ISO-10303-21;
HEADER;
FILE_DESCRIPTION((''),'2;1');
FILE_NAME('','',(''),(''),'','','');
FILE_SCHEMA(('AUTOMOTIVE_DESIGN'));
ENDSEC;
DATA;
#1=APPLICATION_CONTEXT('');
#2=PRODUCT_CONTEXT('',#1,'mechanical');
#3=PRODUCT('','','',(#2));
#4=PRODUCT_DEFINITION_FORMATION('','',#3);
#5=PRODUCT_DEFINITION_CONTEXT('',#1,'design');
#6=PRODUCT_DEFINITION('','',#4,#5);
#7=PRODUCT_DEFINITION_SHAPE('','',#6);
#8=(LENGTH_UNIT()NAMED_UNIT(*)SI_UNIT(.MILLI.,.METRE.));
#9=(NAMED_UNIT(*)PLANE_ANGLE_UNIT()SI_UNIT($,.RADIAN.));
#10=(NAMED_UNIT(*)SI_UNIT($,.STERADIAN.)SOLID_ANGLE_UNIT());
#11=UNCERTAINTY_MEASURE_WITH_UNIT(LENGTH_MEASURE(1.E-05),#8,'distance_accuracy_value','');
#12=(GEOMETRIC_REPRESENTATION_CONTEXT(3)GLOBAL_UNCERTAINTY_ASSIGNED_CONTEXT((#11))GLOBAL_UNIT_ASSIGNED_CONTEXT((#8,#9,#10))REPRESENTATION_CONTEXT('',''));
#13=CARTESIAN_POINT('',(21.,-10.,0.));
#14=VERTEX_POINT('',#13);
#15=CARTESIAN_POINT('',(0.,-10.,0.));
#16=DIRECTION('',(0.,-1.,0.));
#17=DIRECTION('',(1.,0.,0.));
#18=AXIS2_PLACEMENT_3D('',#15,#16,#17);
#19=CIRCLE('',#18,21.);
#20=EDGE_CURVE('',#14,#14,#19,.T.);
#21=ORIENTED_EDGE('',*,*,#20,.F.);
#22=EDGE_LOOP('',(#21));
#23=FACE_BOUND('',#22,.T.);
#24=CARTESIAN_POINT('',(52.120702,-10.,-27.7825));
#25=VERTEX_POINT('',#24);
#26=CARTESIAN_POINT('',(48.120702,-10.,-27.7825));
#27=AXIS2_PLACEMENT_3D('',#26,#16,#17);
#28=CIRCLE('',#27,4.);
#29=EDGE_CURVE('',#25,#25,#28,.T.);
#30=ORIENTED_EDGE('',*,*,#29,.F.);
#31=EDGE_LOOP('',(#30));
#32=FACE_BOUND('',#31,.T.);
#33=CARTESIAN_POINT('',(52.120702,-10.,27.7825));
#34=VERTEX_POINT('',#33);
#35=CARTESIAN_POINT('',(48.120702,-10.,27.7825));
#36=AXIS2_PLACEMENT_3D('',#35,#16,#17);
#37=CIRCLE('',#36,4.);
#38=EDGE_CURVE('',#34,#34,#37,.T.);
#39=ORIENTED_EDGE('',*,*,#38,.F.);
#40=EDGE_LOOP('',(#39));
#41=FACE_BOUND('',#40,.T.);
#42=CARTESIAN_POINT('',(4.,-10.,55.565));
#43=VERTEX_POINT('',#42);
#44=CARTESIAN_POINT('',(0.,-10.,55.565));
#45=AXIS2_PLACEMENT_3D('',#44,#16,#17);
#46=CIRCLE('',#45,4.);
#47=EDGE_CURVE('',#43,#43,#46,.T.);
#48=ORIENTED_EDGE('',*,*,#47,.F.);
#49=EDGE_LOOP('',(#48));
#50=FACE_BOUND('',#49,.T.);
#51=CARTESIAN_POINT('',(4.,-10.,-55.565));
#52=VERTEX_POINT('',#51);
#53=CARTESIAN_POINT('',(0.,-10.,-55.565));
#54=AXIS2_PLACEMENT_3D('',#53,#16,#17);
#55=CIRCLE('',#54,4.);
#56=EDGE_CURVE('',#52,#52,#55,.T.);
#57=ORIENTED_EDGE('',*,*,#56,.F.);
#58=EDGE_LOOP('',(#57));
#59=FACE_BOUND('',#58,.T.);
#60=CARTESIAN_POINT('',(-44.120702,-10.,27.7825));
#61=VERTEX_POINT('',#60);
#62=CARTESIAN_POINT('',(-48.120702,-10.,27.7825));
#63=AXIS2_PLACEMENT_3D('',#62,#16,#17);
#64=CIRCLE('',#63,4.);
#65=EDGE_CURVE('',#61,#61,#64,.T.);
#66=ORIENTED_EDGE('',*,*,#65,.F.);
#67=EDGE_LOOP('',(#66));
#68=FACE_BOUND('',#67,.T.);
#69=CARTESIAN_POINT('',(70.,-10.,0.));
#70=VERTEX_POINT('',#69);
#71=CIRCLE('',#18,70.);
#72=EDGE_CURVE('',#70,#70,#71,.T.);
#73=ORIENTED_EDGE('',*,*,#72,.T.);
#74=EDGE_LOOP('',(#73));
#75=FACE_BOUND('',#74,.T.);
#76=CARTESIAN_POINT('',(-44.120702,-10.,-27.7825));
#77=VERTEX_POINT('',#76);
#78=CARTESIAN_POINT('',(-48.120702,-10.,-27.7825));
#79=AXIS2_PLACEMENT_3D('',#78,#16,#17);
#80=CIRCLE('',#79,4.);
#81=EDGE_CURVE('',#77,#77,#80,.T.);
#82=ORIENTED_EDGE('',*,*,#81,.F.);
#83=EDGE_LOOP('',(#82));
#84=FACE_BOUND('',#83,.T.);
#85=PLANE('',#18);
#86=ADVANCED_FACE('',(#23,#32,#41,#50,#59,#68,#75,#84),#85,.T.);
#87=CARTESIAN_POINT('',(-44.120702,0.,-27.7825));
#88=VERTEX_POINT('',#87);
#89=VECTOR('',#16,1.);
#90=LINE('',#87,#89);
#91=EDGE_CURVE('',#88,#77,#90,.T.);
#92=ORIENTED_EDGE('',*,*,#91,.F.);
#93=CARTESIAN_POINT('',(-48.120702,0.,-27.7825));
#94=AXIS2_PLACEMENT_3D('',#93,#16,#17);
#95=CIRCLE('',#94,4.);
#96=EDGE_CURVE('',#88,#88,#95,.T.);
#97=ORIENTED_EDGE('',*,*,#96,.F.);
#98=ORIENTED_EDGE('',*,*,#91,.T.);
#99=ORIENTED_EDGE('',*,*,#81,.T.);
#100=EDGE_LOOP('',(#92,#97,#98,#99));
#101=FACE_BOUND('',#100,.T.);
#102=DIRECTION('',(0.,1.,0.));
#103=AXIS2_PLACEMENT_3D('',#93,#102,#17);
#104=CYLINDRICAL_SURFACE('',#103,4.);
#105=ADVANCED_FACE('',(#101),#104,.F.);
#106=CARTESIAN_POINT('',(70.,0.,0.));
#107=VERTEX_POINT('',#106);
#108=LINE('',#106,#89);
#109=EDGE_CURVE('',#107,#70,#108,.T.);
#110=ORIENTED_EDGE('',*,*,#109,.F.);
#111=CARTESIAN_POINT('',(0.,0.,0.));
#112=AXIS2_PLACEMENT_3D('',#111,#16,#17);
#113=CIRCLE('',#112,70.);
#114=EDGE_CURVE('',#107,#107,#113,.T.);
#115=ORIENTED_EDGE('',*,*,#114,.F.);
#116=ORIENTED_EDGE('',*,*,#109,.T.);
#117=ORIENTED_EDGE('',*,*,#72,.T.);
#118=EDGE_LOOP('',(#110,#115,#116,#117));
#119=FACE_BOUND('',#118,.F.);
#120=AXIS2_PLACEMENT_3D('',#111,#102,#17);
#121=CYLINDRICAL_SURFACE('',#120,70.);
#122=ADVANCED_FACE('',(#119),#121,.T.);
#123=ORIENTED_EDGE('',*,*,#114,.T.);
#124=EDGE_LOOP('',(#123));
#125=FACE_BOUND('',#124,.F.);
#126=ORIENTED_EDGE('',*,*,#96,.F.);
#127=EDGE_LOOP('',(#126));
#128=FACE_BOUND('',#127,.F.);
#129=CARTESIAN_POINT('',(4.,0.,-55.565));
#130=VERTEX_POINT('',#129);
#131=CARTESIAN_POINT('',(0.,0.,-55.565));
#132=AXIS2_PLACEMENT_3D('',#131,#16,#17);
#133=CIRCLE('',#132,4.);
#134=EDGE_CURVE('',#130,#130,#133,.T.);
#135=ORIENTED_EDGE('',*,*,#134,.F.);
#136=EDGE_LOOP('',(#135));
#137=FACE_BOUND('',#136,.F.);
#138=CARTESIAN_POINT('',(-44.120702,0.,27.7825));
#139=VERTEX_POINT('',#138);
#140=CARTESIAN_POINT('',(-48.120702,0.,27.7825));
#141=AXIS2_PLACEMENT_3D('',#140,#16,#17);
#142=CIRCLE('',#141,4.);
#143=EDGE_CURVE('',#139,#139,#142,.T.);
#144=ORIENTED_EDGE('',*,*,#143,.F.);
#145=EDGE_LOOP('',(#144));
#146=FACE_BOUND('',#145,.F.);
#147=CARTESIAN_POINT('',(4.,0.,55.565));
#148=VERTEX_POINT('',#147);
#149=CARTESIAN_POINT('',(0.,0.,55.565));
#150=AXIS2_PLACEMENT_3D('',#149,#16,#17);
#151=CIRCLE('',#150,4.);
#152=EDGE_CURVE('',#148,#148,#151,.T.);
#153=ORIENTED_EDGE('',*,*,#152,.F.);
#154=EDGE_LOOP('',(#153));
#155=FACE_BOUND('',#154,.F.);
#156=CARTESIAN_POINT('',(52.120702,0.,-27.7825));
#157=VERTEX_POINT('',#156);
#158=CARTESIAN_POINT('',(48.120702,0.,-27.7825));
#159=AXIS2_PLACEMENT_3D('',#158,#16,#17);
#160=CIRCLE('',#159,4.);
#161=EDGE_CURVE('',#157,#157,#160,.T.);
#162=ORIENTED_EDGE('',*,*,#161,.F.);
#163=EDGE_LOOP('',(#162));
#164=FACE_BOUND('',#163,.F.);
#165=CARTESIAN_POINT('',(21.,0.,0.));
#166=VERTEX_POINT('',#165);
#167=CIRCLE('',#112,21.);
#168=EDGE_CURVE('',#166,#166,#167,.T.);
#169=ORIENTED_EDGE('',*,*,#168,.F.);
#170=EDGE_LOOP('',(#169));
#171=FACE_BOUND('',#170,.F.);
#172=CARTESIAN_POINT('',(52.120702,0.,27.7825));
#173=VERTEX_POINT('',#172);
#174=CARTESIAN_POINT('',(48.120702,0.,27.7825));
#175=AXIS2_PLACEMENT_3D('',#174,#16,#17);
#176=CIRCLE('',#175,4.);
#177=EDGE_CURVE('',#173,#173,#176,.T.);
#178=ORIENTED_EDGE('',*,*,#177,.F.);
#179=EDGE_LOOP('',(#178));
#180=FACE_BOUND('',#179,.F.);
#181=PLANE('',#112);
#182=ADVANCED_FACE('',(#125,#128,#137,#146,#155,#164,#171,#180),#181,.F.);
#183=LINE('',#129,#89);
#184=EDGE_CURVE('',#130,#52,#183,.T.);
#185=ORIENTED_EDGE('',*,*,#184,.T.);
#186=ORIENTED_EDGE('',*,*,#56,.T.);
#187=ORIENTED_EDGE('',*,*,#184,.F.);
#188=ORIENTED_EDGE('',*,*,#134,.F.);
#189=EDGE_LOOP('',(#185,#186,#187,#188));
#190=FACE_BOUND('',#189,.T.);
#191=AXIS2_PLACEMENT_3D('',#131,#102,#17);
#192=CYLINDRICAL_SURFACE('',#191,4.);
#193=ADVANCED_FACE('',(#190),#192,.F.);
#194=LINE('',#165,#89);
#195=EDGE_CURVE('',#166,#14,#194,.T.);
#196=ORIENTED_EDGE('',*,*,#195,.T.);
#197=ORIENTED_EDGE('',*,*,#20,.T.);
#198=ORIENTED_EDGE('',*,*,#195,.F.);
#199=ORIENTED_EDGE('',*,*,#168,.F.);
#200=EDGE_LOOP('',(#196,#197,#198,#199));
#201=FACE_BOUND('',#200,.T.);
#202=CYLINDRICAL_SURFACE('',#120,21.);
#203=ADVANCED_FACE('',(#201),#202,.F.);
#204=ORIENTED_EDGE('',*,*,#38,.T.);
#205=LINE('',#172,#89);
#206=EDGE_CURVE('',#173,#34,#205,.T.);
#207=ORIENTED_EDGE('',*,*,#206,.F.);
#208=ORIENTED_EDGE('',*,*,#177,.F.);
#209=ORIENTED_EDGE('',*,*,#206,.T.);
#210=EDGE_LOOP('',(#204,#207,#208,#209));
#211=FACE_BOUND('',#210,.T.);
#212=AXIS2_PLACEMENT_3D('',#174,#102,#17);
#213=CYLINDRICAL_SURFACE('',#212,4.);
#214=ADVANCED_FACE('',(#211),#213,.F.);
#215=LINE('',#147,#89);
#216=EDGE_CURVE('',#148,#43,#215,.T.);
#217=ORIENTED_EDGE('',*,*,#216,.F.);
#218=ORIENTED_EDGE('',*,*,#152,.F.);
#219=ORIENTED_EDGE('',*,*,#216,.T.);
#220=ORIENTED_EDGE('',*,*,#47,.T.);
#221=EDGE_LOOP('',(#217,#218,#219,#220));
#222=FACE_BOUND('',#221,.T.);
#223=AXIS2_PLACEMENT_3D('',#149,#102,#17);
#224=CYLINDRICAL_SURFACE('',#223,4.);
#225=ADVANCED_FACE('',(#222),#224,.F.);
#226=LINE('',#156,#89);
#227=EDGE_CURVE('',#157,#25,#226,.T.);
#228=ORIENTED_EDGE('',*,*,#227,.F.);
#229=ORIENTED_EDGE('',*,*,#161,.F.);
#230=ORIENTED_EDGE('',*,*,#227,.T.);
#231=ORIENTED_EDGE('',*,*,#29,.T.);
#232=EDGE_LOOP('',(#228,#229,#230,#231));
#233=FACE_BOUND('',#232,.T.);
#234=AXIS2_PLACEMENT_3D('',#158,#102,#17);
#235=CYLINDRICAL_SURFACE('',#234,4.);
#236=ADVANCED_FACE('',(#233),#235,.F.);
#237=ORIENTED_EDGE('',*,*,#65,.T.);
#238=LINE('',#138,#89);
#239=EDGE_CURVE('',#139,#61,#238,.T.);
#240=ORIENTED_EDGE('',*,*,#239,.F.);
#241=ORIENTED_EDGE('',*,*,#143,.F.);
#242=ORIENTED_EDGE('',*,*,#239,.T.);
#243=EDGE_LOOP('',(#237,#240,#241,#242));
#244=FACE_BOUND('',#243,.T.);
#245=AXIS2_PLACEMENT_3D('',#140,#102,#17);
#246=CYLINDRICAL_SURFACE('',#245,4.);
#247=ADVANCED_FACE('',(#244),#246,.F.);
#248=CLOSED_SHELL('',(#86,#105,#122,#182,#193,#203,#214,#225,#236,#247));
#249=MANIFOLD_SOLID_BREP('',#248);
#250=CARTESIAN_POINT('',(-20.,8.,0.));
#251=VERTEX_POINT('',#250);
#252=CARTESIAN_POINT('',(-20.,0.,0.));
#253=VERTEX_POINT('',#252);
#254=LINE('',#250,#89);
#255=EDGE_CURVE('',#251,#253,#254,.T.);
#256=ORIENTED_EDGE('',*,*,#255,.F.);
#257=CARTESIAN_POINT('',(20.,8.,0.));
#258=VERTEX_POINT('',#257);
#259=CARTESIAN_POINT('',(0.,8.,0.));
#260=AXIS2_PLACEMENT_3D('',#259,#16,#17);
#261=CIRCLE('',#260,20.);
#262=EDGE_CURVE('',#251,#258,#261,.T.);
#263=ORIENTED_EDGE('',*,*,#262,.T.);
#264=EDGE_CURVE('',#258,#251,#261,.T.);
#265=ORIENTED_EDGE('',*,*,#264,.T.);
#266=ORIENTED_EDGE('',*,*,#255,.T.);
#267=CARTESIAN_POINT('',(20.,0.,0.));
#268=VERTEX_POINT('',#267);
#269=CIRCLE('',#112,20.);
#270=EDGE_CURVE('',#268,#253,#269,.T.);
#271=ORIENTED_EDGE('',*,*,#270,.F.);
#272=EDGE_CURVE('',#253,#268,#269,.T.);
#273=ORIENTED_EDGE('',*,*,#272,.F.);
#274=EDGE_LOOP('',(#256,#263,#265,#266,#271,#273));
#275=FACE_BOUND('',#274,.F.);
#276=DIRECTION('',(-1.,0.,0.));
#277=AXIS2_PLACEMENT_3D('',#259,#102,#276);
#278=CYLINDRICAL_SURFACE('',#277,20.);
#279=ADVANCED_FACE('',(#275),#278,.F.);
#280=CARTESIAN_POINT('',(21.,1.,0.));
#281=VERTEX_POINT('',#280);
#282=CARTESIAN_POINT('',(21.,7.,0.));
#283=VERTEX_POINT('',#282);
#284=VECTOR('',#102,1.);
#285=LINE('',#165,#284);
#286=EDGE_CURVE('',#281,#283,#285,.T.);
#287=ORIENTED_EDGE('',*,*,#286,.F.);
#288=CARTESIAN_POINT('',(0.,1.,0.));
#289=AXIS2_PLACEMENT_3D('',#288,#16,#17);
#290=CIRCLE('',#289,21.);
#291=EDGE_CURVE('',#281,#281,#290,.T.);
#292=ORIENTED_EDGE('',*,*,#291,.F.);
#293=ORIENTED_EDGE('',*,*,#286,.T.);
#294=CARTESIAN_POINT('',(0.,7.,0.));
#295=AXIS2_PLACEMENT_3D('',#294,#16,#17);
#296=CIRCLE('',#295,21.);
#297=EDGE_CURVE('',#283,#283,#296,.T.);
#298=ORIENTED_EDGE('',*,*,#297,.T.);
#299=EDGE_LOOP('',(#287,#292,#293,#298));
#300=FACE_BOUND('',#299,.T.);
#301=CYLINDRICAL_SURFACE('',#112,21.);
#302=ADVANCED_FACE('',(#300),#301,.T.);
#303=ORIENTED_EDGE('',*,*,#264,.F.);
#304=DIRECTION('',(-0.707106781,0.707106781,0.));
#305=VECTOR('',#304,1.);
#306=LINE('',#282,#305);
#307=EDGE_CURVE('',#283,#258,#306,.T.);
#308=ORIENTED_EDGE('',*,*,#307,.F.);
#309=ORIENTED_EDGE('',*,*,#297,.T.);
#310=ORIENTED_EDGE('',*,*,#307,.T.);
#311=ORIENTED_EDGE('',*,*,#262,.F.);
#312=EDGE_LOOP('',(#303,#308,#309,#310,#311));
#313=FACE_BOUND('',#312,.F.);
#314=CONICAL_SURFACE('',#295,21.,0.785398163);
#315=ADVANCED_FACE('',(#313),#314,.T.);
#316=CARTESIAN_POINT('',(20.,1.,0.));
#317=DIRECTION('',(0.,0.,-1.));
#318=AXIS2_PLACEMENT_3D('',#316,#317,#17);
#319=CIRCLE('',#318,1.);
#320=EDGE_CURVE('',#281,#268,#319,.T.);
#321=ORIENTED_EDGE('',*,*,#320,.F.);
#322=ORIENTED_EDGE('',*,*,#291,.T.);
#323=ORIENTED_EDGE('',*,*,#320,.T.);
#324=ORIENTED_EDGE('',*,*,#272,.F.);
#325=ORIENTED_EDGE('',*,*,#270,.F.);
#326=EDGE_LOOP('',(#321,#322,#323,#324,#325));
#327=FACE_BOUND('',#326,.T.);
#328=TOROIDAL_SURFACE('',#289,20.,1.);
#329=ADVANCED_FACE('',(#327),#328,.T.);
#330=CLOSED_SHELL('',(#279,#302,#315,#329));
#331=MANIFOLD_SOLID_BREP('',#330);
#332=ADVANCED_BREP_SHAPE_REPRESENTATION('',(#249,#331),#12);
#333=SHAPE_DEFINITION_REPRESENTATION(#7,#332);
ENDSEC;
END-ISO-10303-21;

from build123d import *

# Parameters (mm, degrees)
F0_R     = 70
F0_R_2   = 4
F0_R_3   = 21
F1_DEPTH = 10
F2_R     = 21
F3_DEPTH = 8
F4_SIZE  = 1
F6_R     = 20
F7_DEPTH = 20


# Not quite as in the source:
# - a fillet or chamfer that OpenCascade refuses, or shapes differently, is made with other operations: its cross-section is extruded or revolved along the edge and cut away or added


with BuildPart() as f1:
    # F0 (on Front) → F1 (new body)
    with BuildSketch(Plane.XZ):
        Circle(F0_R)
        with Locations((-48.1207015613, -27.7825)):
            Circle(F0_R_2, mode=Mode.SUBTRACT)
        with Locations((0, -55.565)):
            Circle(F0_R_2, mode=Mode.SUBTRACT)
        with Locations((48.1207015613, -27.7825)):
            Circle(F0_R_2, mode=Mode.SUBTRACT)
        with Locations((-48.1207015613, 27.7825)):
            Circle(F0_R_2, mode=Mode.SUBTRACT)
        Circle(F0_R_3, mode=Mode.SUBTRACT)
        with Locations((48.1207015613, 27.7825)):
            Circle(F0_R_2, mode=Mode.SUBTRACT)
        with Locations((0, 55.565)):
            Circle(F0_R_2, mode=Mode.SUBTRACT)
    extrude(amount=F1_DEPTH)

    # F2 (on Front) → F3 (join)
    with BuildSketch(Plane.XZ):
        Circle(F2_R)
    extrude(amount=-F3_DEPTH)

    # F4
    f4_edges = [f1.edges().sort_by_distance(p)[0] for p in [
        (-21, 8, 0),
    ]]
    chamfer(f4_edges, length=F4_SIZE)

    # F5: fillet of radius 1 on 1 edges, made by hand

    # F5_s1 → F5_t2 (revolve, cut)
    with BuildSketch(Plane.XY):
        with BuildLine():
            ThreePointArc((21, 1), (20.7071067812, 0.2928932188), (20, 0))
            Line((20, 0), (21, 0))
            Line((21, 0), (21, 1))
        make_face()
    revolve(axis=Axis((0, 0, 0), (0, -1, 0)), mode=Mode.SUBTRACT)

    # F6 (on face) → F7 (cut)
    with BuildSketch(Plane(origin=(0, 8, 0), x_dir=(-1, 0, 0), z_dir=(0, 1, 0))):
        Circle(F6_R)
    extrude(amount=-F7_DEPTH, mode=Mode.SUBTRACT)


solid = f1.part
